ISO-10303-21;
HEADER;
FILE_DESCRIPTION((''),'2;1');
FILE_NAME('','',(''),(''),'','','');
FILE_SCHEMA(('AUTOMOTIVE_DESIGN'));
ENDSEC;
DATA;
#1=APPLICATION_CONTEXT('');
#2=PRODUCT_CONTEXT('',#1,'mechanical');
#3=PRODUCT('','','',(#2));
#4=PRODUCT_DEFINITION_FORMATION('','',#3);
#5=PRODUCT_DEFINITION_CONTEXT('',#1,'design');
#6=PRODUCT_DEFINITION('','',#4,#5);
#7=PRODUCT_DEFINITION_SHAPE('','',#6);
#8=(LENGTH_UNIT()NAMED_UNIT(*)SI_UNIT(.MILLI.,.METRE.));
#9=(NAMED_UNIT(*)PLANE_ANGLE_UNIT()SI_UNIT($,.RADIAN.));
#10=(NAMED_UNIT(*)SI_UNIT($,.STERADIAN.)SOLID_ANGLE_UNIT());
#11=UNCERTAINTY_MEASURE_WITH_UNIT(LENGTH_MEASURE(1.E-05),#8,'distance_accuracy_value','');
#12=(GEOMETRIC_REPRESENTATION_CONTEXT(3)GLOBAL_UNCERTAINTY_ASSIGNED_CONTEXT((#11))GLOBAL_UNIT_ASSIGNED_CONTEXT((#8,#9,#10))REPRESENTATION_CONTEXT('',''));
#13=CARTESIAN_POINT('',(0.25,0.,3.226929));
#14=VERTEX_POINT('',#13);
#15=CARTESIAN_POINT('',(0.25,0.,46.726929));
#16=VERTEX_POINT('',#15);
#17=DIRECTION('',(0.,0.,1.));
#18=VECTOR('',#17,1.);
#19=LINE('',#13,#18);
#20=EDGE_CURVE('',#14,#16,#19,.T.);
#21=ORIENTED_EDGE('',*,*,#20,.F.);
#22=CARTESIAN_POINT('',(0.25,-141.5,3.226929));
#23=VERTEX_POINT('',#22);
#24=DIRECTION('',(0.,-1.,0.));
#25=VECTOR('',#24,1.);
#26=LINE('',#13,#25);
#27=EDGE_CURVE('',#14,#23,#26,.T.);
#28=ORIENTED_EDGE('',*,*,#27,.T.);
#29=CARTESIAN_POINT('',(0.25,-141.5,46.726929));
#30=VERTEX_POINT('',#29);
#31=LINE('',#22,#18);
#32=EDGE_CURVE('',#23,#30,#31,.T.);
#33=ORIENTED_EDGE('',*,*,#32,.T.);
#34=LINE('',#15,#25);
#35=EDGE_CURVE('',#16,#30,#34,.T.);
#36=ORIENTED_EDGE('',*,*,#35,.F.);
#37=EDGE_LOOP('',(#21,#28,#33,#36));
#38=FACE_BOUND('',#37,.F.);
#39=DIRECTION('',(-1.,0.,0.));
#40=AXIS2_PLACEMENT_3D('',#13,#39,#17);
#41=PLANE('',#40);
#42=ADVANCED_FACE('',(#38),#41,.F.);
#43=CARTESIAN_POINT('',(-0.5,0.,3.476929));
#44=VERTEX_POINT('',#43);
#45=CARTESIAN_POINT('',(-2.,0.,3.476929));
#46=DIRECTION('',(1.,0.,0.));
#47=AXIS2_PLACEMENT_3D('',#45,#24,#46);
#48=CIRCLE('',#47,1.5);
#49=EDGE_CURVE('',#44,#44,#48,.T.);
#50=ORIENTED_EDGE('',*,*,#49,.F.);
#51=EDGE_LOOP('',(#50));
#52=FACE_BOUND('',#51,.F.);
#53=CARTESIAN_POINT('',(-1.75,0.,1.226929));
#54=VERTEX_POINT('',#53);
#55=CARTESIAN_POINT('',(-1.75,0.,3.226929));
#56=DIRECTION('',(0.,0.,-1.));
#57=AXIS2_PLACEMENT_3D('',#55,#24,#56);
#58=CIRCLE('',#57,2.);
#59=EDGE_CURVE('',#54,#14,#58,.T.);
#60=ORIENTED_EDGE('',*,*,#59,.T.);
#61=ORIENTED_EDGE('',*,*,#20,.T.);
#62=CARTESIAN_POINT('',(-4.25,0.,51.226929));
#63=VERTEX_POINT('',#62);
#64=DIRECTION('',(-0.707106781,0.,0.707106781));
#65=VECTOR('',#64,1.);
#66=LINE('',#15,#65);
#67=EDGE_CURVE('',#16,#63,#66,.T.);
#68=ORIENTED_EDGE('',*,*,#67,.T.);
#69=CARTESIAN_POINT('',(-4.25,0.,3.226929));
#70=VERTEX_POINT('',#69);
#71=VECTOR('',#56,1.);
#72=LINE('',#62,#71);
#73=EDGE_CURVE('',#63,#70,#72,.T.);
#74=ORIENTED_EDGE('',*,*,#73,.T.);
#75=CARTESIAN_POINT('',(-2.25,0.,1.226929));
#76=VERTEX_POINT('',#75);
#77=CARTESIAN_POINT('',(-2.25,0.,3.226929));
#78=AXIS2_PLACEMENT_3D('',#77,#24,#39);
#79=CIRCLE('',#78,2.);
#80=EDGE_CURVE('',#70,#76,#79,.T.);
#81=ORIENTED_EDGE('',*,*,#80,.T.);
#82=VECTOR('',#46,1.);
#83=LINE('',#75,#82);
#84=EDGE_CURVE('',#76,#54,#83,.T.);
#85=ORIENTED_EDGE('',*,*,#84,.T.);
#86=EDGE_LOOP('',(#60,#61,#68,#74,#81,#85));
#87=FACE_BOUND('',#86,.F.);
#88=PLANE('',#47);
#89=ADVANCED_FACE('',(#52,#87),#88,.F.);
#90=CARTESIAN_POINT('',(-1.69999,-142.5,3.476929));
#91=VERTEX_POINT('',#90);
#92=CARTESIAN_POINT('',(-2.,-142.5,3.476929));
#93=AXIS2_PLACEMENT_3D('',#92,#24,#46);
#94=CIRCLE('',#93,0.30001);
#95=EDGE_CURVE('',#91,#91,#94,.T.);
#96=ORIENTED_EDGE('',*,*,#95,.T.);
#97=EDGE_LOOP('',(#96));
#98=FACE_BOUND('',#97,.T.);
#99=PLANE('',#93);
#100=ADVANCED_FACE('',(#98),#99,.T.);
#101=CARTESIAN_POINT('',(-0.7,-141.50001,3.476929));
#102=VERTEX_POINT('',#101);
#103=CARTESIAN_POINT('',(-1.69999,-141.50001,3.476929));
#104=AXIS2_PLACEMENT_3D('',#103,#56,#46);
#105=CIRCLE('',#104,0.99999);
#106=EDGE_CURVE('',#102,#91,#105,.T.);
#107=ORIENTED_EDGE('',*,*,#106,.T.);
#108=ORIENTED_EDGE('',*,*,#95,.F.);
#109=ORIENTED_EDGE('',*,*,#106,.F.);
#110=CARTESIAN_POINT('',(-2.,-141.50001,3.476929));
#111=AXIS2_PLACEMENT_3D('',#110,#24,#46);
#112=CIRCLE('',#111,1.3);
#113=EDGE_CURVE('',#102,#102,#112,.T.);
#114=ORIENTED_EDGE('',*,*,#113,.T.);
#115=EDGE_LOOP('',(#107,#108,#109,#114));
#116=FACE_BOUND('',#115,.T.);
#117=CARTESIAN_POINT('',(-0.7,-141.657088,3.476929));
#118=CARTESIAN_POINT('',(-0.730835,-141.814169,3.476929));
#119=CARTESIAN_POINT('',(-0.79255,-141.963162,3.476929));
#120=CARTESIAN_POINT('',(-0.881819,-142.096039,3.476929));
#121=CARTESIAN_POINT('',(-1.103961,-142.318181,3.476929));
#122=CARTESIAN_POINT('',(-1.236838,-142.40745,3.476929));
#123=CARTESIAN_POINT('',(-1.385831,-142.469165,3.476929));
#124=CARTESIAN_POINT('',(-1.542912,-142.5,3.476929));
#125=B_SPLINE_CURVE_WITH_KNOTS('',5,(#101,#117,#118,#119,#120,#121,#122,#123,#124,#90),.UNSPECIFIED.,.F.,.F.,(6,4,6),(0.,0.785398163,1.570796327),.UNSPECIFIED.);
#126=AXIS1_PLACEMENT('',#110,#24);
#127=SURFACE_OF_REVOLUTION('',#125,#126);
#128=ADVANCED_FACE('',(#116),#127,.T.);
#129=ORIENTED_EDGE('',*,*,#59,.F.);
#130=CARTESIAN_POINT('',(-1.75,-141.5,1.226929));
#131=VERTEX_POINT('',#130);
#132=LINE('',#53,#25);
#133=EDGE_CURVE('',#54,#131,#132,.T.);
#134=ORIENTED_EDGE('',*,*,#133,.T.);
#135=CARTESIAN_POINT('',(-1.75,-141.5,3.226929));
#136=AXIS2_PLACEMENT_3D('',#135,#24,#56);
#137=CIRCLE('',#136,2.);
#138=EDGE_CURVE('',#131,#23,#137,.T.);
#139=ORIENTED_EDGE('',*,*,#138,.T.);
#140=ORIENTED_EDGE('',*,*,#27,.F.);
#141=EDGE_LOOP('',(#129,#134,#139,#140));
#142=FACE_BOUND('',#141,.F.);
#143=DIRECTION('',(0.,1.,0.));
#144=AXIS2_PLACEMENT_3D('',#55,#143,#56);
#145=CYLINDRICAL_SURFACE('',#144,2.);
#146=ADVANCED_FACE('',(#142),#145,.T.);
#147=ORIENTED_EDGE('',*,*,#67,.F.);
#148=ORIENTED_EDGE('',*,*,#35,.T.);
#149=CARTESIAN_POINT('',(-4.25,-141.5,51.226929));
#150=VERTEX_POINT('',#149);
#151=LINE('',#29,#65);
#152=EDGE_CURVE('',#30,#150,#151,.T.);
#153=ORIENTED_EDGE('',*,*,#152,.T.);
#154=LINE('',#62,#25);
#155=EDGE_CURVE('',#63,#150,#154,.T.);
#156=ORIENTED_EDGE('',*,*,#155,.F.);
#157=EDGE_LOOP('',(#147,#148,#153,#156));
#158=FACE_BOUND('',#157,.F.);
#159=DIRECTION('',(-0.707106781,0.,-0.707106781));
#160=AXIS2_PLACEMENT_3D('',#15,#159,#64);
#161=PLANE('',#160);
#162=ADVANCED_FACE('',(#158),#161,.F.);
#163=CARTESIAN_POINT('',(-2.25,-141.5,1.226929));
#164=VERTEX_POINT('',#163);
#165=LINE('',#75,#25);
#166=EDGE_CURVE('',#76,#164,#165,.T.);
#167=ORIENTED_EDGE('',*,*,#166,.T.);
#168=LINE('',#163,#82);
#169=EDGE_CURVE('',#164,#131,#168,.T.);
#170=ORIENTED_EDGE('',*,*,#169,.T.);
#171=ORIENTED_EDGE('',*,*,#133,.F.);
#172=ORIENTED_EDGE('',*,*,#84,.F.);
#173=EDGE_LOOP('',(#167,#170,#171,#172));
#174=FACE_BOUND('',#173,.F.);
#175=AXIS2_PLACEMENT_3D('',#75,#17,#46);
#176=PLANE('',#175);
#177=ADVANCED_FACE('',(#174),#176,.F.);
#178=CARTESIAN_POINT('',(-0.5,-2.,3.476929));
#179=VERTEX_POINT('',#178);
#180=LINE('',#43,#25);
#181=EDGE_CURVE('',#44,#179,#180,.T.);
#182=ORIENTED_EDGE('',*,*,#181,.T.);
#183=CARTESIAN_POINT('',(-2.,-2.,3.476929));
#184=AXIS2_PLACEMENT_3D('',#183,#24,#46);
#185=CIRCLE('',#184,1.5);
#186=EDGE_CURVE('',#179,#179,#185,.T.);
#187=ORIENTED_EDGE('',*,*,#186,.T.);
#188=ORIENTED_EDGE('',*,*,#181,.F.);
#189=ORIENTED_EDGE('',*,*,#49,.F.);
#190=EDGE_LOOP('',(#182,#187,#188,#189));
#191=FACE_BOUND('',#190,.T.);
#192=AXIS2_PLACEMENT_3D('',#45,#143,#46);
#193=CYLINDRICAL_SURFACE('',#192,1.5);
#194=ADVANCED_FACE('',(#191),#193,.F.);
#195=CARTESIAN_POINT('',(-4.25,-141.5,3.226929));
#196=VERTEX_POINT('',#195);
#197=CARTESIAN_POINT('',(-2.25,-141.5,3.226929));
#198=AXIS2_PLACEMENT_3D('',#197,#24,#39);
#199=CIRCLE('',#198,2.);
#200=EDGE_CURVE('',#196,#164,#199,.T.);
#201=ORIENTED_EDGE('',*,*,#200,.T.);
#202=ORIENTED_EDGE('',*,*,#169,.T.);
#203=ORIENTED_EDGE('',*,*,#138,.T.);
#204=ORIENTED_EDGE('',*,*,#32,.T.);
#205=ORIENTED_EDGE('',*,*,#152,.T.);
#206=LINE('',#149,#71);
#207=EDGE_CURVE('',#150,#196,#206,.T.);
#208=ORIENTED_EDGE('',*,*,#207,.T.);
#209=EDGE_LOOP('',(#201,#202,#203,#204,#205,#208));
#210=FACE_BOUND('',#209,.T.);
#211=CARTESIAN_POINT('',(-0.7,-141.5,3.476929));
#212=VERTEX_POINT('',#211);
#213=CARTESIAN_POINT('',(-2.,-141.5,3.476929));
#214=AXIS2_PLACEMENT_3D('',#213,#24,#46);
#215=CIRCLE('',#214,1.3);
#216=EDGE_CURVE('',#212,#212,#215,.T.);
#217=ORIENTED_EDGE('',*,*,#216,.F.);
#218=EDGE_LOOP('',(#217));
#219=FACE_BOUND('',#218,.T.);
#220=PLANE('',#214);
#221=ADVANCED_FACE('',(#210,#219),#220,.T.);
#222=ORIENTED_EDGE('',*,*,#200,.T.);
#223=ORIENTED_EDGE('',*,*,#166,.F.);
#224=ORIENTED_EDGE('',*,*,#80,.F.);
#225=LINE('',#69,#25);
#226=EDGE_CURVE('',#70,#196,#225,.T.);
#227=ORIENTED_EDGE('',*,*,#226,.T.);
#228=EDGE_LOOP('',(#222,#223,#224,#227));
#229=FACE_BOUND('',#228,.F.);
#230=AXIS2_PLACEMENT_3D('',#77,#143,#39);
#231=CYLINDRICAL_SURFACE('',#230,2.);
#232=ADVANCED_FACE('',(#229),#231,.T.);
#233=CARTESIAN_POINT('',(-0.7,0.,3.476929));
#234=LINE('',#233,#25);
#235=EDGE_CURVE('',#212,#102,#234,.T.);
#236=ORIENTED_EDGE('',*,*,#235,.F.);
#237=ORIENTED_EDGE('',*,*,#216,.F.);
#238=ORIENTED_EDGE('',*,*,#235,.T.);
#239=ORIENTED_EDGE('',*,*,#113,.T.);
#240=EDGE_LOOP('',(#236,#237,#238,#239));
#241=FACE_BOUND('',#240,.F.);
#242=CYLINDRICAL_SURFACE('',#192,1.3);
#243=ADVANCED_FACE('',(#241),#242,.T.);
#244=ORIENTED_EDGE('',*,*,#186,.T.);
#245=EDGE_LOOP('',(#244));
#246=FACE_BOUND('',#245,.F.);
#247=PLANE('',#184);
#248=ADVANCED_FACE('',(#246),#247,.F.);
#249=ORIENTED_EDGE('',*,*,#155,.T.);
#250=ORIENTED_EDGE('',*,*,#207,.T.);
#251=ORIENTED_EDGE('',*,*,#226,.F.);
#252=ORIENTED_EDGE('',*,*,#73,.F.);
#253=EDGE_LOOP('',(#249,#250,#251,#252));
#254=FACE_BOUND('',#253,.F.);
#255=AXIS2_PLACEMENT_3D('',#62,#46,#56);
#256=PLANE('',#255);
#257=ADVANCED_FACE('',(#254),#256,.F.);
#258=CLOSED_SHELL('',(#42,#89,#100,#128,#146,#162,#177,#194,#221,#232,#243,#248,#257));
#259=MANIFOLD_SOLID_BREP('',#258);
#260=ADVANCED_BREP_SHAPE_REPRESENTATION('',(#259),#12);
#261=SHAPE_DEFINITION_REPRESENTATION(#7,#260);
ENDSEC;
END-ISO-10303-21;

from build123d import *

# Parameters (mm, degrees)
F0_R     = 1.5
F1_DEPTH = 141.5
F0_R_2   = 1.3
F2_DEPTH = 141.5
F3_DEPTH = 142.5
F4_DEPTH = 2
F5_R     = 0.99999


# Not quite as in the source:
# - a fillet or chamfer is up to 0.001 mm smaller than in the source, because OpenCascade refuses the exact size


with BuildPart() as f1:
    # F0 (on Front) → F1 (new body)
    with BuildSketch(Plane.XZ):
        with BuildLine():
            Line((0.25, 46.7269286196), (-4.25, 51.2269286196))
            Line((-4.25, 51.2269286196), (-4.25, 3.2269286196))
            ThreePointArc((-4.25, 3.2269286196), (-3.6642135624, 1.8127150573), (-2.25, 1.2269286196))
            Line((-2.25, 1.2269286196), (-1.75, 1.2269286196))
            ThreePointArc((-1.75, 1.2269286196), (-0.3357864376, 1.8127150573), (0.25, 3.2269286196))
            Line((0.25, 3.2269286196), (0.25, 46.7269286196))
        make_face()
        with Locations((-2, 3.4769286196)):
            Circle(F0_R, mode=Mode.SUBTRACT)
    extrude(amount=F1_DEPTH)

    # F0 (on Front) → F2 (join)
    with BuildSketch(Plane.XZ):
        with Locations((-2, 3.4769286196)):
            Circle(F0_R)
        with Locations((-2, 3.4769286196)):
            Circle(F0_R_2, mode=Mode.SUBTRACT)
    extrude(amount=F2_DEPTH)

    # F0 (on Front) → F3 (join)
    with BuildSketch(Plane.XZ):
        with Locations((-2, 3.4769286196)):
            Circle(F0_R_2)
    extrude(amount=F3_DEPTH)

    # F0 (on Front) → F4 (cut)
    with BuildSketch(Plane.XZ):
        with Locations((-2, 3.4769286196)):
            Circle(F0_R)
        with Locations((-2, 3.4769286196)):
            Circle(F0_R_2, mode=Mode.SUBTRACT)
        with Locations((-2, 3.4769286196)):
            Circle(F0_R_2)
    extrude(amount=F4_DEPTH, mode=Mode.SUBTRACT)

    # F5 (radius 1 in the source; OpenCascade refuses exactly that, so slightly less here)
    f5_edges = [f1.edges().sort_by_distance(p)[0] for p in [
        (-3.3, -142.5, 3.476929),
    ]]
    fillet(f5_edges, radius=F5_R)


solid = f1.part
